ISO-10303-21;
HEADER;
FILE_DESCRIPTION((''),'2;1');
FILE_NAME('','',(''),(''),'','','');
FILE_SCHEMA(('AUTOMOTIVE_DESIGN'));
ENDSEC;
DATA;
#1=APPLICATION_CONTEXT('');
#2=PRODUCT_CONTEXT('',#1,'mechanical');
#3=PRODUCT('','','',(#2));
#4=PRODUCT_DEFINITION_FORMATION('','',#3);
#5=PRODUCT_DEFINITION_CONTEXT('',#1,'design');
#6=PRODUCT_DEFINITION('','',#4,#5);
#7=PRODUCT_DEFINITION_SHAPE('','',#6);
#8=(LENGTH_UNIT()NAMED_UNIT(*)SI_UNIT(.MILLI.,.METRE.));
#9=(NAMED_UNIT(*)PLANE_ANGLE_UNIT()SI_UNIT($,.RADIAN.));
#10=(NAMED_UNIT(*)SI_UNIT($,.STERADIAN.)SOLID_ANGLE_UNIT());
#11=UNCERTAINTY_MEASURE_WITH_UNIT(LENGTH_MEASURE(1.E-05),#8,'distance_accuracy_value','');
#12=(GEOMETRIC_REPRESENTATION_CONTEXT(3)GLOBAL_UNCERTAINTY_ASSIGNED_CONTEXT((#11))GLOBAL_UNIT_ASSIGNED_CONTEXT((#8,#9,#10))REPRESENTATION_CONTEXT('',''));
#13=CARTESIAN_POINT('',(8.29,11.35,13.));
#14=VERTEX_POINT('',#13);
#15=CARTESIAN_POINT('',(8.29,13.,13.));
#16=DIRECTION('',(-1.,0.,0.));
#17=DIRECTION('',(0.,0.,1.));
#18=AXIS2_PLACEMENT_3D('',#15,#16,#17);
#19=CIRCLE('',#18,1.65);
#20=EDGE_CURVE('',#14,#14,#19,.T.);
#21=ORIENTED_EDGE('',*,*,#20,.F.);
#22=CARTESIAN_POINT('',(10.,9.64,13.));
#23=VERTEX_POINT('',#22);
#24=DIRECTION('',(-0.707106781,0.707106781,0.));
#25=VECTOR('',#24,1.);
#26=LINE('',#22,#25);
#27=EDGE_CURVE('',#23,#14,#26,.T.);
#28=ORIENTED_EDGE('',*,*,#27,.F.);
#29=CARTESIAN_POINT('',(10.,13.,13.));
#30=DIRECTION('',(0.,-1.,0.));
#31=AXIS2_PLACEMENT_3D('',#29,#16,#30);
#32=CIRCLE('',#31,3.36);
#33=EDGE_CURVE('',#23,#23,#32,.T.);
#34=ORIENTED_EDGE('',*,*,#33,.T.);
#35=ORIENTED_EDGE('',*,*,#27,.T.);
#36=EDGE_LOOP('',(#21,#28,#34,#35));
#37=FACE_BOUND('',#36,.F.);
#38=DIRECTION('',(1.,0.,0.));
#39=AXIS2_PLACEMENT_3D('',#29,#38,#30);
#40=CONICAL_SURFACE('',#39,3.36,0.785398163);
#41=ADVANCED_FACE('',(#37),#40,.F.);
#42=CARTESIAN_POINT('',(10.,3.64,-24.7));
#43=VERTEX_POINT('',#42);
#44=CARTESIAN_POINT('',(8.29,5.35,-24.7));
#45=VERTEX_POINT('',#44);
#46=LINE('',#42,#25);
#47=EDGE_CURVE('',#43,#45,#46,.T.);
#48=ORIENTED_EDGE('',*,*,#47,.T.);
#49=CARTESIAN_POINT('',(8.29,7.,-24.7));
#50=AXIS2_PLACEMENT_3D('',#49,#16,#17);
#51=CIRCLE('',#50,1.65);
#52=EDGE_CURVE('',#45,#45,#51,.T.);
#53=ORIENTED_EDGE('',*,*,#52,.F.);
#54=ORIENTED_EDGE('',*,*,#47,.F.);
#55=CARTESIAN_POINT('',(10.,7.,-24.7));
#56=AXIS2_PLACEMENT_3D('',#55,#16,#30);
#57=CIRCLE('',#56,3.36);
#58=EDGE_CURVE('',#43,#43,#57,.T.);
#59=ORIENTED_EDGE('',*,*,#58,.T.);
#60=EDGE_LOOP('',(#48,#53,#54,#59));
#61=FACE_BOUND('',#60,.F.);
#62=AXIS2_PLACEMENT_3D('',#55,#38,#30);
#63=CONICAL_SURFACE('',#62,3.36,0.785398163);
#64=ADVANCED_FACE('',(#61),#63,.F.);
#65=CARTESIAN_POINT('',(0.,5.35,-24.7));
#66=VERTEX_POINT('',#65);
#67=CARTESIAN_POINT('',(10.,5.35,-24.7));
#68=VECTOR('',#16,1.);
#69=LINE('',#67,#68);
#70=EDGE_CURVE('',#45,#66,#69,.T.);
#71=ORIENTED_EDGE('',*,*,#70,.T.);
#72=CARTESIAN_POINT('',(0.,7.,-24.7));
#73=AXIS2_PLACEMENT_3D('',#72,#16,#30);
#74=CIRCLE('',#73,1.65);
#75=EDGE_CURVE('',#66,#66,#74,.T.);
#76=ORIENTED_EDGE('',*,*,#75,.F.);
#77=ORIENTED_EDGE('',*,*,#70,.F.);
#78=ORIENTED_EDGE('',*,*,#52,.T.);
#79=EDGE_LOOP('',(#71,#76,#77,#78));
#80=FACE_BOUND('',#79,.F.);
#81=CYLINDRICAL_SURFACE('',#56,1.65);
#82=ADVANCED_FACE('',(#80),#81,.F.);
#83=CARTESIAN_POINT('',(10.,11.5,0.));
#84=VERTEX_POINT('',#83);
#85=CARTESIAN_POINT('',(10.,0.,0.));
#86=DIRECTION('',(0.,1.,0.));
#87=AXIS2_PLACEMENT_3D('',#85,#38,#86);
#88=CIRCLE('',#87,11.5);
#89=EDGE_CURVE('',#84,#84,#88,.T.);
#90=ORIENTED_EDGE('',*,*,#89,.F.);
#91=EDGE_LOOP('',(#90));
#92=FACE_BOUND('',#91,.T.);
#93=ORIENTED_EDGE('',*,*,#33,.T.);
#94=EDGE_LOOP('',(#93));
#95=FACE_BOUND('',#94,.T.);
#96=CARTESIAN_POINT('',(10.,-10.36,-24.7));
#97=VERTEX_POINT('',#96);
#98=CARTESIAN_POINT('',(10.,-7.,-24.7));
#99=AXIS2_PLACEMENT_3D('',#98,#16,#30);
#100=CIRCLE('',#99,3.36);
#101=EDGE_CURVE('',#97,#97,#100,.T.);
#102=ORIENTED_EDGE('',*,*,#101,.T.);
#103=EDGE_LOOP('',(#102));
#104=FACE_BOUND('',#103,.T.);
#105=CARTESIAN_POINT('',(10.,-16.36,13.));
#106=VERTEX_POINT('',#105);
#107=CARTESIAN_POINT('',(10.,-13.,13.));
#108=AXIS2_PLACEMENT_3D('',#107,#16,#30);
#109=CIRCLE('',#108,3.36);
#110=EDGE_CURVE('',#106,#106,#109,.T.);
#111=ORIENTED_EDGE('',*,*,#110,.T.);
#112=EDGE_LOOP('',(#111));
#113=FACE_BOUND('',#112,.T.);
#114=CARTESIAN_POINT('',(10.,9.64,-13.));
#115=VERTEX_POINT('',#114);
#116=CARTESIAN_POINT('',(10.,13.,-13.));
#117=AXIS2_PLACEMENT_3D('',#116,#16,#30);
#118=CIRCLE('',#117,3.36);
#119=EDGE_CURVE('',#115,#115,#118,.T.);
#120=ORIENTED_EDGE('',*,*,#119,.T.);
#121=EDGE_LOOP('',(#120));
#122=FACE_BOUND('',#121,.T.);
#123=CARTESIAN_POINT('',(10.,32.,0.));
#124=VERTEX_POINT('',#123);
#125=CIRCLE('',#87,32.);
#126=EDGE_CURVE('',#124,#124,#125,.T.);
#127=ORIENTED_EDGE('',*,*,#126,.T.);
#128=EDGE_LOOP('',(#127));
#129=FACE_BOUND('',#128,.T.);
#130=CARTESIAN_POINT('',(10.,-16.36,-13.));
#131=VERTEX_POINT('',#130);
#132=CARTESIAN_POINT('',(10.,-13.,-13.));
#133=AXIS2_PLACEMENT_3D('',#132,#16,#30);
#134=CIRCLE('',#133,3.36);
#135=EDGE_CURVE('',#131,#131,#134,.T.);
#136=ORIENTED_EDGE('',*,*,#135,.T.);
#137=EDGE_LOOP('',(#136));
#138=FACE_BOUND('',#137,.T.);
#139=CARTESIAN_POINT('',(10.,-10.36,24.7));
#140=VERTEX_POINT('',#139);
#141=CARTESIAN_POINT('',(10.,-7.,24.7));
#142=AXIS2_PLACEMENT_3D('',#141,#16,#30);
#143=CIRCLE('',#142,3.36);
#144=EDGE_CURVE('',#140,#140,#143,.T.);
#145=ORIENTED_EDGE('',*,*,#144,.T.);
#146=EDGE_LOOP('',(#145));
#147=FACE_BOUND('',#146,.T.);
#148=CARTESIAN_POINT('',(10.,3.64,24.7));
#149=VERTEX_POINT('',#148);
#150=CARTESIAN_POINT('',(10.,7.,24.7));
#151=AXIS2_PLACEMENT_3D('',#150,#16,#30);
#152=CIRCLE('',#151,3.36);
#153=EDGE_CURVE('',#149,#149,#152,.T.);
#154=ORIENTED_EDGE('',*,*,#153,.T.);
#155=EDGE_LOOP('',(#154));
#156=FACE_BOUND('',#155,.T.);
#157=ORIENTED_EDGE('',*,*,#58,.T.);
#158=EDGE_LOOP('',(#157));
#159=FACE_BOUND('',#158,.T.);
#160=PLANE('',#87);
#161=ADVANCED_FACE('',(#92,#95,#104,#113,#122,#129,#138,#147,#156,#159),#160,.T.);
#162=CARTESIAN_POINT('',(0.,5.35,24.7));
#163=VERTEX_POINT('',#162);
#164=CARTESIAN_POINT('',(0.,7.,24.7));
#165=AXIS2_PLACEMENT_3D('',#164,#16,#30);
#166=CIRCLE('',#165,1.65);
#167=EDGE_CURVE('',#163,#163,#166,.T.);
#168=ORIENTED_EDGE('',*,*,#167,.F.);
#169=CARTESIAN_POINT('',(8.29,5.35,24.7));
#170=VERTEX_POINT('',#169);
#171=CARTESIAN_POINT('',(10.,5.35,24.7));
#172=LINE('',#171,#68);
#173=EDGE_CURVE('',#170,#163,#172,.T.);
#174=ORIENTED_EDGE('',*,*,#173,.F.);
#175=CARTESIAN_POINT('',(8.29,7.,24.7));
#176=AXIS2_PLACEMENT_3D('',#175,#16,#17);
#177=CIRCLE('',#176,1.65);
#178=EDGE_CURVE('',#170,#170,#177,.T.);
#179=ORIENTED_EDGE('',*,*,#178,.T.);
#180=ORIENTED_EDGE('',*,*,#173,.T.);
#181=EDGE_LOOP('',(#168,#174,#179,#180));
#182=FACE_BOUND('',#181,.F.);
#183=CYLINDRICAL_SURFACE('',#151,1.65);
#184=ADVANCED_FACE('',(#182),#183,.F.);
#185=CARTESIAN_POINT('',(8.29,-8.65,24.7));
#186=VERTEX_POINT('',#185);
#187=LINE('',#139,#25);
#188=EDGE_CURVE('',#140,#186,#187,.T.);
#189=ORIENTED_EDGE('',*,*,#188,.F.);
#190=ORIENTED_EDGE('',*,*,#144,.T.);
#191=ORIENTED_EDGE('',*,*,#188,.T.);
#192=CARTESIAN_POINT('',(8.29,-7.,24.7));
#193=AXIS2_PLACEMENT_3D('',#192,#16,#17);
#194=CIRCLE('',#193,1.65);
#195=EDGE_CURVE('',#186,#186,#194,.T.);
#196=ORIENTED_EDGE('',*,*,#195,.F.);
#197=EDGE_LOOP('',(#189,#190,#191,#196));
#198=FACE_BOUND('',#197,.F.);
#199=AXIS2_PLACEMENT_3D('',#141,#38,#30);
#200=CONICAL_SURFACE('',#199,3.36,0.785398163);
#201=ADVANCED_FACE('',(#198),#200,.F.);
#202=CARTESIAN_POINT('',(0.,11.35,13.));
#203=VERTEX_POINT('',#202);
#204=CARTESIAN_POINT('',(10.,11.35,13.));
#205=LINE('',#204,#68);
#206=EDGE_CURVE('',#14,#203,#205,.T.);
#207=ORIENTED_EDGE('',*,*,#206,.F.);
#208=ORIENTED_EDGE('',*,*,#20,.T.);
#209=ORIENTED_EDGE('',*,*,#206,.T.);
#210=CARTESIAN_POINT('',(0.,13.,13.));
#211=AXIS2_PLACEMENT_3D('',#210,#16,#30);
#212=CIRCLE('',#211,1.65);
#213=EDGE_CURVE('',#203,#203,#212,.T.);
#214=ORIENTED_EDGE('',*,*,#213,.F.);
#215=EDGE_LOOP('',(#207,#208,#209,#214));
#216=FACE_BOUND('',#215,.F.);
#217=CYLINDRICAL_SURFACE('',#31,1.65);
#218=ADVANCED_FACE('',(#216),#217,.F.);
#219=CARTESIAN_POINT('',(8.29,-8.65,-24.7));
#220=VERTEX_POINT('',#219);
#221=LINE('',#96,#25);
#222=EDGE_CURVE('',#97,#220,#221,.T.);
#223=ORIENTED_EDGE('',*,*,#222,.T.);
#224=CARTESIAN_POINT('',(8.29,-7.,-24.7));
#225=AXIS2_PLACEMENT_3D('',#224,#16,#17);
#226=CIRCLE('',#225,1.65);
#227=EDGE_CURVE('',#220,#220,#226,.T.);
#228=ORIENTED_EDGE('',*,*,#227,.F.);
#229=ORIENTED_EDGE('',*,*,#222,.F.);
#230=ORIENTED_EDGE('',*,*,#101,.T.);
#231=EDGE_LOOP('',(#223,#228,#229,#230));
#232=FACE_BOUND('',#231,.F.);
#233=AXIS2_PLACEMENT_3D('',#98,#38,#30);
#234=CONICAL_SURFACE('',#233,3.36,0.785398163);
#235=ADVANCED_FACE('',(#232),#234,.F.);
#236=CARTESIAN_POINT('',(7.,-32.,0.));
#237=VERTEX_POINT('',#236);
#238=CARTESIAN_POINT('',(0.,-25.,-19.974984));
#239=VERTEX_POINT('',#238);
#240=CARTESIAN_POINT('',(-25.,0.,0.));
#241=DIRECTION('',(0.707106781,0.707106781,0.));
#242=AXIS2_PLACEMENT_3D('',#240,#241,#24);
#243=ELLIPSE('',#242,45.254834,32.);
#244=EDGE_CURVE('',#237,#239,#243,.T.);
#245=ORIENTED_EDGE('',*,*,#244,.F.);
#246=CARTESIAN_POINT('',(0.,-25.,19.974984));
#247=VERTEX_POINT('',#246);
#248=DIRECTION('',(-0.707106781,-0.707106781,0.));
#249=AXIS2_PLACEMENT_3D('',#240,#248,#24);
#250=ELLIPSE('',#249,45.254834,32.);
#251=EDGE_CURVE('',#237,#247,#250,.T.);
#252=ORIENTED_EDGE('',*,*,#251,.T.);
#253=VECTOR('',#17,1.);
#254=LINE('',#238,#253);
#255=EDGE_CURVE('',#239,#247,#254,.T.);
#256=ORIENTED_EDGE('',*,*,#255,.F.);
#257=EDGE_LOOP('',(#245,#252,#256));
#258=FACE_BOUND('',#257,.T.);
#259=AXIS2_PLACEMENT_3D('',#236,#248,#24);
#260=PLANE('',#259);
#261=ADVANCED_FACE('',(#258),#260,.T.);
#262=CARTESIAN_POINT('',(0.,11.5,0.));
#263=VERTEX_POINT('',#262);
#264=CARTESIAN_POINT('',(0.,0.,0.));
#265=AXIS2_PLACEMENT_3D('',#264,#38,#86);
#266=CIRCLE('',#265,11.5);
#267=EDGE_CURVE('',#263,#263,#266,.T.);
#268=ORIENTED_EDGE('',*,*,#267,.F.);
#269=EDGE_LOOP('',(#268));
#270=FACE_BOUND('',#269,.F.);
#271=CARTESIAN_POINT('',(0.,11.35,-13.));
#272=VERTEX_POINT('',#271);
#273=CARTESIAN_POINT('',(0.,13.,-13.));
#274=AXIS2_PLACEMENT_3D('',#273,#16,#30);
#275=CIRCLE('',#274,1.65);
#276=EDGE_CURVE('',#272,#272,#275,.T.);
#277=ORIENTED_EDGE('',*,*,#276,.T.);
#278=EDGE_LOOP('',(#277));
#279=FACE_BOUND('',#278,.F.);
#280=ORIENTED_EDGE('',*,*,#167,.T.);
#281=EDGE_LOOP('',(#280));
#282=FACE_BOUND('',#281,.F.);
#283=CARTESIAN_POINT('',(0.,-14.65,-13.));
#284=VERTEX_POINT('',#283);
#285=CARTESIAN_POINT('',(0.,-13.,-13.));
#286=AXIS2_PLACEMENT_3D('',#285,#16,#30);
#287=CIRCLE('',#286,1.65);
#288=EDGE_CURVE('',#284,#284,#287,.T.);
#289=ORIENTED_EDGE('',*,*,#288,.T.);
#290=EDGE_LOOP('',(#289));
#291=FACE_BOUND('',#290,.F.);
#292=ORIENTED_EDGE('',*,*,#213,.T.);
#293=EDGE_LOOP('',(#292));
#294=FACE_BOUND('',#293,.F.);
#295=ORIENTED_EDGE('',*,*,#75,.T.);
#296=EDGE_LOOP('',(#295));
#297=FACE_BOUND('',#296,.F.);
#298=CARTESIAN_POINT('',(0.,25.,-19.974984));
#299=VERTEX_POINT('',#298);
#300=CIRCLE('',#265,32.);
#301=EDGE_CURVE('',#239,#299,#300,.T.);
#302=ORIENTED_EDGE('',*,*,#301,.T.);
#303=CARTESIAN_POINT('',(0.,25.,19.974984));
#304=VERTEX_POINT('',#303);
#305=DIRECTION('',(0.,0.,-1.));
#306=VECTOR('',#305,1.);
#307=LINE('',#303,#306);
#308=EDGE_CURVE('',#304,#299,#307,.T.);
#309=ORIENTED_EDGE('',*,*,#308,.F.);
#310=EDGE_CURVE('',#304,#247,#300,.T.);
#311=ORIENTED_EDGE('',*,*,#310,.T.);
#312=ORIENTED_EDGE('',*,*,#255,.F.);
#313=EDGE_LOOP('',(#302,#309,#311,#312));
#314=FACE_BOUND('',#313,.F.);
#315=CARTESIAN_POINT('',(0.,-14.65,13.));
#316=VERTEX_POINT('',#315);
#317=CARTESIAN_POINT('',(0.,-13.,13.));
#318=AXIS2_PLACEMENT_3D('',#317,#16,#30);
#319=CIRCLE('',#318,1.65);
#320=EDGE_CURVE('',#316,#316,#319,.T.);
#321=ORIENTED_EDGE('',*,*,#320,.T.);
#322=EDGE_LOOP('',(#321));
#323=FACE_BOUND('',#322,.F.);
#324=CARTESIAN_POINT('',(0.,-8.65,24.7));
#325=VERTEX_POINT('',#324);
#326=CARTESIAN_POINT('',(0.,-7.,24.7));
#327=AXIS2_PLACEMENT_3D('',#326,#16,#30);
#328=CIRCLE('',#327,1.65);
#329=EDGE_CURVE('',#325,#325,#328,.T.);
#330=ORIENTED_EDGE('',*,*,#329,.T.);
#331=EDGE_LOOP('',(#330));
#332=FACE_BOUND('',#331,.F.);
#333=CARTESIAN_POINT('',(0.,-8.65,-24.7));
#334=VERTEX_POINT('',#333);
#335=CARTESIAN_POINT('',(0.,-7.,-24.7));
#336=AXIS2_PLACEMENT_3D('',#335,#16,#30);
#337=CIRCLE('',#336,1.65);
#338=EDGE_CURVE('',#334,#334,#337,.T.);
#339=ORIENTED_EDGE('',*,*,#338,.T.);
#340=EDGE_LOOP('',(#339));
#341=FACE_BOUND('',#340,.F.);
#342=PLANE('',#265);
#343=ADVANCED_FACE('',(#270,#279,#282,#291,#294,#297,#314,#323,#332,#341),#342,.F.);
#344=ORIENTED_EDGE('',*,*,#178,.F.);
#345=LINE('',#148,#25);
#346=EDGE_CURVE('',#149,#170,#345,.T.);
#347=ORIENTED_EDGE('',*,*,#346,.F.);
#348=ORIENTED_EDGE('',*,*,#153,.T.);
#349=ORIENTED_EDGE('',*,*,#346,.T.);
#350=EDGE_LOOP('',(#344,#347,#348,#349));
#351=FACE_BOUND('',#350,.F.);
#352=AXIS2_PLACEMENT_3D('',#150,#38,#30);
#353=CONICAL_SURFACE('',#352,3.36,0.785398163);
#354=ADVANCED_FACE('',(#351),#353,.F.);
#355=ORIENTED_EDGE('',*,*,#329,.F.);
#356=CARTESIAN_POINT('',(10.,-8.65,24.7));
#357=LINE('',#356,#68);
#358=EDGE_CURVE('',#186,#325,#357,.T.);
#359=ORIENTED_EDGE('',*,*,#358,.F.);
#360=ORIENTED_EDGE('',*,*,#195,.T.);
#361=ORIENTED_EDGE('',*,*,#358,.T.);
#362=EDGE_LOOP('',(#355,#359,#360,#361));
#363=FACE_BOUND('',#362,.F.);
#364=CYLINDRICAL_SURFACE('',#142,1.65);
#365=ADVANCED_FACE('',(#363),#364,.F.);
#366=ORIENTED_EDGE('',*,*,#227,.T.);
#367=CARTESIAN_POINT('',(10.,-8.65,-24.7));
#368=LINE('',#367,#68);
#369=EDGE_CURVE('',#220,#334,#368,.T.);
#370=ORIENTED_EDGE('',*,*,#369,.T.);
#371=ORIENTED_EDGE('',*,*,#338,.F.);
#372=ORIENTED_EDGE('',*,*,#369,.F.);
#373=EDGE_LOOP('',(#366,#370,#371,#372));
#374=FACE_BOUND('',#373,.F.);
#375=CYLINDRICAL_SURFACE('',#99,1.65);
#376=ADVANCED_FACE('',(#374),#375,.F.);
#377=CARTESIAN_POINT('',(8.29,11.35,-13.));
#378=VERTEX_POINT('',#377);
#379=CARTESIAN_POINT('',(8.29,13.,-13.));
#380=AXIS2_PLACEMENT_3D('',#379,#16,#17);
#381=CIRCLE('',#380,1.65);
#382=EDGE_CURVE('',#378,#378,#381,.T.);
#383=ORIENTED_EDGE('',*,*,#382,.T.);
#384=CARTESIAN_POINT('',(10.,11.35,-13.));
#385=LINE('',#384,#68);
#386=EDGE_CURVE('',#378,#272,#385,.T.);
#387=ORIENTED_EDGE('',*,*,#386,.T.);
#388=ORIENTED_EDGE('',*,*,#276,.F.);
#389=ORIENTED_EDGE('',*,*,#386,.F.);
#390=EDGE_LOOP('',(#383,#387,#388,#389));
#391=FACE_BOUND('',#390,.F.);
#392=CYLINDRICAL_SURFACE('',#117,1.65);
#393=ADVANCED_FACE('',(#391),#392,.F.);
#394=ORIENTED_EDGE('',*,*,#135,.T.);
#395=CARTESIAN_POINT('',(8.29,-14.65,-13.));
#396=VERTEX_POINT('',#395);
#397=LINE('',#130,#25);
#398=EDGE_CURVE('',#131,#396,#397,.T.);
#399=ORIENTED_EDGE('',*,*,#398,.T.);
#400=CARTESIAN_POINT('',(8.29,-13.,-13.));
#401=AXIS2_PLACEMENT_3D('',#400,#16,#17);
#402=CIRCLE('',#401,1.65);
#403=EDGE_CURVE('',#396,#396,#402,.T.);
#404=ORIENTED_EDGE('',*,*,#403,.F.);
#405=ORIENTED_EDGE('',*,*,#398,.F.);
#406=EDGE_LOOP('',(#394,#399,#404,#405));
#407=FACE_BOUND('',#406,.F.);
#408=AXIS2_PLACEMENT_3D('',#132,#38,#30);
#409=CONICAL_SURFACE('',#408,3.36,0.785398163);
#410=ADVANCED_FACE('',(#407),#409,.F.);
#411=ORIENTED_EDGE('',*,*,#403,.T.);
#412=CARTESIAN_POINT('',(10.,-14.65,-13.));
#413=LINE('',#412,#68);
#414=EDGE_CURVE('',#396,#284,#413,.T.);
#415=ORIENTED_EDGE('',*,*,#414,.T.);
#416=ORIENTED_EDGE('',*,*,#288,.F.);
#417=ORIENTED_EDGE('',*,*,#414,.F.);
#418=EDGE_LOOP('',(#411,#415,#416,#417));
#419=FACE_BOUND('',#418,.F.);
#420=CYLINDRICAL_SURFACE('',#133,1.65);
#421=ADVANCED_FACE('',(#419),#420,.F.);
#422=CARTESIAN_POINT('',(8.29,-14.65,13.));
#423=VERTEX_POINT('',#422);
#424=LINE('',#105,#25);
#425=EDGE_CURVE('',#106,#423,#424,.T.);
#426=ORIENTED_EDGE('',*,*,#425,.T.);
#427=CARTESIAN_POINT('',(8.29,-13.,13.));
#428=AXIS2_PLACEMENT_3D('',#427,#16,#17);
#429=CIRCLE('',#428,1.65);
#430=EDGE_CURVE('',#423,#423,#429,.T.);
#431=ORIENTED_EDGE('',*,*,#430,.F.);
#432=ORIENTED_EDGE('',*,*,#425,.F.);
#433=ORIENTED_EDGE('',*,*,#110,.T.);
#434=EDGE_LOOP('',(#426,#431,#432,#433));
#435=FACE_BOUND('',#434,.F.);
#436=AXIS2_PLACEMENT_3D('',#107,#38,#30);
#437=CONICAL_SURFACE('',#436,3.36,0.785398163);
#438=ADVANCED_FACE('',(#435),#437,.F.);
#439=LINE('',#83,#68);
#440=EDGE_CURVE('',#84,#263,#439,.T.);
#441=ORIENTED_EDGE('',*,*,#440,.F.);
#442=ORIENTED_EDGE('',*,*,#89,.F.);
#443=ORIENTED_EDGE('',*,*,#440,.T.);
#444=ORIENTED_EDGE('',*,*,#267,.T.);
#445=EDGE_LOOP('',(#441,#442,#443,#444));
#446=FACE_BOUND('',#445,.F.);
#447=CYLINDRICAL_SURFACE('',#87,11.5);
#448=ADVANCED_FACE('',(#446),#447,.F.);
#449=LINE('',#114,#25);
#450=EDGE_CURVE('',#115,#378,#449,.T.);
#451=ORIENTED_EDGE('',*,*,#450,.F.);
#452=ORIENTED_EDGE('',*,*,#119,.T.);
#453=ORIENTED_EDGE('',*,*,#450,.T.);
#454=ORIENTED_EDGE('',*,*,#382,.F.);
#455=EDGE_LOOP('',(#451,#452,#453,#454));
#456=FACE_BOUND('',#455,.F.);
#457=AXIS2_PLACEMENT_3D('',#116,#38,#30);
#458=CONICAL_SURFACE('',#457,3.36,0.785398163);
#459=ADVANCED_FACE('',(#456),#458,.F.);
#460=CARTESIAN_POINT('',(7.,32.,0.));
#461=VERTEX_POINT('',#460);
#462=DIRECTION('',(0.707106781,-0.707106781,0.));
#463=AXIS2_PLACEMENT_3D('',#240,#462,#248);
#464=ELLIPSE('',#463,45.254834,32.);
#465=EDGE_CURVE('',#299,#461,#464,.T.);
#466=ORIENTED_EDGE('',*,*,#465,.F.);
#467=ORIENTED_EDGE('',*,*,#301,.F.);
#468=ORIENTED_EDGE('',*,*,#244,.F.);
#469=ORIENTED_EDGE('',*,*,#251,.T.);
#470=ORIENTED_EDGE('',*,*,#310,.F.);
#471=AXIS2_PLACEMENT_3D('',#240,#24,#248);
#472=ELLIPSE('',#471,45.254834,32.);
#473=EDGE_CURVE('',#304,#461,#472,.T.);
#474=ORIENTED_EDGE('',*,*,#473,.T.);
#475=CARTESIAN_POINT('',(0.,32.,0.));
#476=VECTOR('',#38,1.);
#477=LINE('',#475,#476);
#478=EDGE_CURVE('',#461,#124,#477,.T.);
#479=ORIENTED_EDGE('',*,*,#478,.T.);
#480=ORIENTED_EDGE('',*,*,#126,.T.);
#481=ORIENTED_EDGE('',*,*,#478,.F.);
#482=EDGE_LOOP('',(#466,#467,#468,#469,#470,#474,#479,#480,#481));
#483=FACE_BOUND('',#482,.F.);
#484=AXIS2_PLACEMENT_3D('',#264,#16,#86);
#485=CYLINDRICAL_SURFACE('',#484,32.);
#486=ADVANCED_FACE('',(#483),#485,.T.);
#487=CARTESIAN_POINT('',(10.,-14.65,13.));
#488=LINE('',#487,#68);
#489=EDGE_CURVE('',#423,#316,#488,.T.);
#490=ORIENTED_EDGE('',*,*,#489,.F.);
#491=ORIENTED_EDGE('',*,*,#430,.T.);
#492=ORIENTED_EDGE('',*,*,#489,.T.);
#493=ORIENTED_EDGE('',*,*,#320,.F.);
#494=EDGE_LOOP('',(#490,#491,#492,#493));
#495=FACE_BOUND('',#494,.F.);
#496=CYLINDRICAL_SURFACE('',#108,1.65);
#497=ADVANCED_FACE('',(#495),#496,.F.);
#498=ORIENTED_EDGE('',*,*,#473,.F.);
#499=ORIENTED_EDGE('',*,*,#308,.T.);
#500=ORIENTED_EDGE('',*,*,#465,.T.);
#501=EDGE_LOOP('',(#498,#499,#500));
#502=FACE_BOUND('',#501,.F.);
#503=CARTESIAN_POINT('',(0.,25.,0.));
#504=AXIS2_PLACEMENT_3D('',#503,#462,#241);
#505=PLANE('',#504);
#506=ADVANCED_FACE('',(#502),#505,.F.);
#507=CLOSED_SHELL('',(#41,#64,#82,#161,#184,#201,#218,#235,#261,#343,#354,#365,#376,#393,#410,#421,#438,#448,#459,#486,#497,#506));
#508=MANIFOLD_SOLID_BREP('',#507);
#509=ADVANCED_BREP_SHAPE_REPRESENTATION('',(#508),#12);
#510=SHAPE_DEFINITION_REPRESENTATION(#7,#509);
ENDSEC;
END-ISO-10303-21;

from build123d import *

# Parameters (mm, degrees)
F0_R           = 32
F1_DEPTH       = 10
F3_D           = 3.3
F3_CSINK_D     = 6.72
F3_CSINK_ANGLE = 90
F5_D           = 3.3
F5_CSINK_D     = 6.72
F5_CSINK_ANGLE = 90
F6_R           = 11.5
F7_DEPTH       = 10.001
F9_DEPTH       = 32.001
F9_DEPTH_BACK  = 32.001


with BuildPart() as f1:
    # F0 (on Right) → F1 (new body)
    with BuildSketch(Plane.YZ):
        Circle(F0_R)
    extrude(amount=F1_DEPTH)

    # F3 (through all)
    with Locations(Plane.YZ.offset(10)):
        with Locations((-13, 13), (13, 13), (13, -13), (-13, -13)):
            CounterSinkHole(F3_D / 2, F3_CSINK_D / 2, counter_sink_angle=F3_CSINK_ANGLE)

    # F5 (through all)
    with Locations(Plane.YZ.offset(10)):
        with Locations((-7, 24.7), (7, 24.7), (-7, -24.7), (7, -24.7)):
            CounterSinkHole(F5_D / 2, F5_CSINK_D / 2, counter_sink_angle=F5_CSINK_ANGLE)

    # F6 (on face) → F7 (cut, through all)
    with BuildSketch(Plane.YZ.offset(10)):
        Circle(F6_R)
    extrude(amount=-F7_DEPTH, mode=Mode.SUBTRACT)

    # F8 (on Top) → F9 (cut, two sides)
    with BuildSketch(Plane.XY) as f9_sk:
        Polygon((0, -25), (0, -32), (7, -32), align=None)
        Polygon((0, 32), (0, 25), (7, 32), align=None)
    extrude(amount=-F9_DEPTH, mode=Mode.SUBTRACT)
    extrude(f9_sk.sketch, amount=F9_DEPTH_BACK, mode=Mode.SUBTRACT)


solid = f1.part
